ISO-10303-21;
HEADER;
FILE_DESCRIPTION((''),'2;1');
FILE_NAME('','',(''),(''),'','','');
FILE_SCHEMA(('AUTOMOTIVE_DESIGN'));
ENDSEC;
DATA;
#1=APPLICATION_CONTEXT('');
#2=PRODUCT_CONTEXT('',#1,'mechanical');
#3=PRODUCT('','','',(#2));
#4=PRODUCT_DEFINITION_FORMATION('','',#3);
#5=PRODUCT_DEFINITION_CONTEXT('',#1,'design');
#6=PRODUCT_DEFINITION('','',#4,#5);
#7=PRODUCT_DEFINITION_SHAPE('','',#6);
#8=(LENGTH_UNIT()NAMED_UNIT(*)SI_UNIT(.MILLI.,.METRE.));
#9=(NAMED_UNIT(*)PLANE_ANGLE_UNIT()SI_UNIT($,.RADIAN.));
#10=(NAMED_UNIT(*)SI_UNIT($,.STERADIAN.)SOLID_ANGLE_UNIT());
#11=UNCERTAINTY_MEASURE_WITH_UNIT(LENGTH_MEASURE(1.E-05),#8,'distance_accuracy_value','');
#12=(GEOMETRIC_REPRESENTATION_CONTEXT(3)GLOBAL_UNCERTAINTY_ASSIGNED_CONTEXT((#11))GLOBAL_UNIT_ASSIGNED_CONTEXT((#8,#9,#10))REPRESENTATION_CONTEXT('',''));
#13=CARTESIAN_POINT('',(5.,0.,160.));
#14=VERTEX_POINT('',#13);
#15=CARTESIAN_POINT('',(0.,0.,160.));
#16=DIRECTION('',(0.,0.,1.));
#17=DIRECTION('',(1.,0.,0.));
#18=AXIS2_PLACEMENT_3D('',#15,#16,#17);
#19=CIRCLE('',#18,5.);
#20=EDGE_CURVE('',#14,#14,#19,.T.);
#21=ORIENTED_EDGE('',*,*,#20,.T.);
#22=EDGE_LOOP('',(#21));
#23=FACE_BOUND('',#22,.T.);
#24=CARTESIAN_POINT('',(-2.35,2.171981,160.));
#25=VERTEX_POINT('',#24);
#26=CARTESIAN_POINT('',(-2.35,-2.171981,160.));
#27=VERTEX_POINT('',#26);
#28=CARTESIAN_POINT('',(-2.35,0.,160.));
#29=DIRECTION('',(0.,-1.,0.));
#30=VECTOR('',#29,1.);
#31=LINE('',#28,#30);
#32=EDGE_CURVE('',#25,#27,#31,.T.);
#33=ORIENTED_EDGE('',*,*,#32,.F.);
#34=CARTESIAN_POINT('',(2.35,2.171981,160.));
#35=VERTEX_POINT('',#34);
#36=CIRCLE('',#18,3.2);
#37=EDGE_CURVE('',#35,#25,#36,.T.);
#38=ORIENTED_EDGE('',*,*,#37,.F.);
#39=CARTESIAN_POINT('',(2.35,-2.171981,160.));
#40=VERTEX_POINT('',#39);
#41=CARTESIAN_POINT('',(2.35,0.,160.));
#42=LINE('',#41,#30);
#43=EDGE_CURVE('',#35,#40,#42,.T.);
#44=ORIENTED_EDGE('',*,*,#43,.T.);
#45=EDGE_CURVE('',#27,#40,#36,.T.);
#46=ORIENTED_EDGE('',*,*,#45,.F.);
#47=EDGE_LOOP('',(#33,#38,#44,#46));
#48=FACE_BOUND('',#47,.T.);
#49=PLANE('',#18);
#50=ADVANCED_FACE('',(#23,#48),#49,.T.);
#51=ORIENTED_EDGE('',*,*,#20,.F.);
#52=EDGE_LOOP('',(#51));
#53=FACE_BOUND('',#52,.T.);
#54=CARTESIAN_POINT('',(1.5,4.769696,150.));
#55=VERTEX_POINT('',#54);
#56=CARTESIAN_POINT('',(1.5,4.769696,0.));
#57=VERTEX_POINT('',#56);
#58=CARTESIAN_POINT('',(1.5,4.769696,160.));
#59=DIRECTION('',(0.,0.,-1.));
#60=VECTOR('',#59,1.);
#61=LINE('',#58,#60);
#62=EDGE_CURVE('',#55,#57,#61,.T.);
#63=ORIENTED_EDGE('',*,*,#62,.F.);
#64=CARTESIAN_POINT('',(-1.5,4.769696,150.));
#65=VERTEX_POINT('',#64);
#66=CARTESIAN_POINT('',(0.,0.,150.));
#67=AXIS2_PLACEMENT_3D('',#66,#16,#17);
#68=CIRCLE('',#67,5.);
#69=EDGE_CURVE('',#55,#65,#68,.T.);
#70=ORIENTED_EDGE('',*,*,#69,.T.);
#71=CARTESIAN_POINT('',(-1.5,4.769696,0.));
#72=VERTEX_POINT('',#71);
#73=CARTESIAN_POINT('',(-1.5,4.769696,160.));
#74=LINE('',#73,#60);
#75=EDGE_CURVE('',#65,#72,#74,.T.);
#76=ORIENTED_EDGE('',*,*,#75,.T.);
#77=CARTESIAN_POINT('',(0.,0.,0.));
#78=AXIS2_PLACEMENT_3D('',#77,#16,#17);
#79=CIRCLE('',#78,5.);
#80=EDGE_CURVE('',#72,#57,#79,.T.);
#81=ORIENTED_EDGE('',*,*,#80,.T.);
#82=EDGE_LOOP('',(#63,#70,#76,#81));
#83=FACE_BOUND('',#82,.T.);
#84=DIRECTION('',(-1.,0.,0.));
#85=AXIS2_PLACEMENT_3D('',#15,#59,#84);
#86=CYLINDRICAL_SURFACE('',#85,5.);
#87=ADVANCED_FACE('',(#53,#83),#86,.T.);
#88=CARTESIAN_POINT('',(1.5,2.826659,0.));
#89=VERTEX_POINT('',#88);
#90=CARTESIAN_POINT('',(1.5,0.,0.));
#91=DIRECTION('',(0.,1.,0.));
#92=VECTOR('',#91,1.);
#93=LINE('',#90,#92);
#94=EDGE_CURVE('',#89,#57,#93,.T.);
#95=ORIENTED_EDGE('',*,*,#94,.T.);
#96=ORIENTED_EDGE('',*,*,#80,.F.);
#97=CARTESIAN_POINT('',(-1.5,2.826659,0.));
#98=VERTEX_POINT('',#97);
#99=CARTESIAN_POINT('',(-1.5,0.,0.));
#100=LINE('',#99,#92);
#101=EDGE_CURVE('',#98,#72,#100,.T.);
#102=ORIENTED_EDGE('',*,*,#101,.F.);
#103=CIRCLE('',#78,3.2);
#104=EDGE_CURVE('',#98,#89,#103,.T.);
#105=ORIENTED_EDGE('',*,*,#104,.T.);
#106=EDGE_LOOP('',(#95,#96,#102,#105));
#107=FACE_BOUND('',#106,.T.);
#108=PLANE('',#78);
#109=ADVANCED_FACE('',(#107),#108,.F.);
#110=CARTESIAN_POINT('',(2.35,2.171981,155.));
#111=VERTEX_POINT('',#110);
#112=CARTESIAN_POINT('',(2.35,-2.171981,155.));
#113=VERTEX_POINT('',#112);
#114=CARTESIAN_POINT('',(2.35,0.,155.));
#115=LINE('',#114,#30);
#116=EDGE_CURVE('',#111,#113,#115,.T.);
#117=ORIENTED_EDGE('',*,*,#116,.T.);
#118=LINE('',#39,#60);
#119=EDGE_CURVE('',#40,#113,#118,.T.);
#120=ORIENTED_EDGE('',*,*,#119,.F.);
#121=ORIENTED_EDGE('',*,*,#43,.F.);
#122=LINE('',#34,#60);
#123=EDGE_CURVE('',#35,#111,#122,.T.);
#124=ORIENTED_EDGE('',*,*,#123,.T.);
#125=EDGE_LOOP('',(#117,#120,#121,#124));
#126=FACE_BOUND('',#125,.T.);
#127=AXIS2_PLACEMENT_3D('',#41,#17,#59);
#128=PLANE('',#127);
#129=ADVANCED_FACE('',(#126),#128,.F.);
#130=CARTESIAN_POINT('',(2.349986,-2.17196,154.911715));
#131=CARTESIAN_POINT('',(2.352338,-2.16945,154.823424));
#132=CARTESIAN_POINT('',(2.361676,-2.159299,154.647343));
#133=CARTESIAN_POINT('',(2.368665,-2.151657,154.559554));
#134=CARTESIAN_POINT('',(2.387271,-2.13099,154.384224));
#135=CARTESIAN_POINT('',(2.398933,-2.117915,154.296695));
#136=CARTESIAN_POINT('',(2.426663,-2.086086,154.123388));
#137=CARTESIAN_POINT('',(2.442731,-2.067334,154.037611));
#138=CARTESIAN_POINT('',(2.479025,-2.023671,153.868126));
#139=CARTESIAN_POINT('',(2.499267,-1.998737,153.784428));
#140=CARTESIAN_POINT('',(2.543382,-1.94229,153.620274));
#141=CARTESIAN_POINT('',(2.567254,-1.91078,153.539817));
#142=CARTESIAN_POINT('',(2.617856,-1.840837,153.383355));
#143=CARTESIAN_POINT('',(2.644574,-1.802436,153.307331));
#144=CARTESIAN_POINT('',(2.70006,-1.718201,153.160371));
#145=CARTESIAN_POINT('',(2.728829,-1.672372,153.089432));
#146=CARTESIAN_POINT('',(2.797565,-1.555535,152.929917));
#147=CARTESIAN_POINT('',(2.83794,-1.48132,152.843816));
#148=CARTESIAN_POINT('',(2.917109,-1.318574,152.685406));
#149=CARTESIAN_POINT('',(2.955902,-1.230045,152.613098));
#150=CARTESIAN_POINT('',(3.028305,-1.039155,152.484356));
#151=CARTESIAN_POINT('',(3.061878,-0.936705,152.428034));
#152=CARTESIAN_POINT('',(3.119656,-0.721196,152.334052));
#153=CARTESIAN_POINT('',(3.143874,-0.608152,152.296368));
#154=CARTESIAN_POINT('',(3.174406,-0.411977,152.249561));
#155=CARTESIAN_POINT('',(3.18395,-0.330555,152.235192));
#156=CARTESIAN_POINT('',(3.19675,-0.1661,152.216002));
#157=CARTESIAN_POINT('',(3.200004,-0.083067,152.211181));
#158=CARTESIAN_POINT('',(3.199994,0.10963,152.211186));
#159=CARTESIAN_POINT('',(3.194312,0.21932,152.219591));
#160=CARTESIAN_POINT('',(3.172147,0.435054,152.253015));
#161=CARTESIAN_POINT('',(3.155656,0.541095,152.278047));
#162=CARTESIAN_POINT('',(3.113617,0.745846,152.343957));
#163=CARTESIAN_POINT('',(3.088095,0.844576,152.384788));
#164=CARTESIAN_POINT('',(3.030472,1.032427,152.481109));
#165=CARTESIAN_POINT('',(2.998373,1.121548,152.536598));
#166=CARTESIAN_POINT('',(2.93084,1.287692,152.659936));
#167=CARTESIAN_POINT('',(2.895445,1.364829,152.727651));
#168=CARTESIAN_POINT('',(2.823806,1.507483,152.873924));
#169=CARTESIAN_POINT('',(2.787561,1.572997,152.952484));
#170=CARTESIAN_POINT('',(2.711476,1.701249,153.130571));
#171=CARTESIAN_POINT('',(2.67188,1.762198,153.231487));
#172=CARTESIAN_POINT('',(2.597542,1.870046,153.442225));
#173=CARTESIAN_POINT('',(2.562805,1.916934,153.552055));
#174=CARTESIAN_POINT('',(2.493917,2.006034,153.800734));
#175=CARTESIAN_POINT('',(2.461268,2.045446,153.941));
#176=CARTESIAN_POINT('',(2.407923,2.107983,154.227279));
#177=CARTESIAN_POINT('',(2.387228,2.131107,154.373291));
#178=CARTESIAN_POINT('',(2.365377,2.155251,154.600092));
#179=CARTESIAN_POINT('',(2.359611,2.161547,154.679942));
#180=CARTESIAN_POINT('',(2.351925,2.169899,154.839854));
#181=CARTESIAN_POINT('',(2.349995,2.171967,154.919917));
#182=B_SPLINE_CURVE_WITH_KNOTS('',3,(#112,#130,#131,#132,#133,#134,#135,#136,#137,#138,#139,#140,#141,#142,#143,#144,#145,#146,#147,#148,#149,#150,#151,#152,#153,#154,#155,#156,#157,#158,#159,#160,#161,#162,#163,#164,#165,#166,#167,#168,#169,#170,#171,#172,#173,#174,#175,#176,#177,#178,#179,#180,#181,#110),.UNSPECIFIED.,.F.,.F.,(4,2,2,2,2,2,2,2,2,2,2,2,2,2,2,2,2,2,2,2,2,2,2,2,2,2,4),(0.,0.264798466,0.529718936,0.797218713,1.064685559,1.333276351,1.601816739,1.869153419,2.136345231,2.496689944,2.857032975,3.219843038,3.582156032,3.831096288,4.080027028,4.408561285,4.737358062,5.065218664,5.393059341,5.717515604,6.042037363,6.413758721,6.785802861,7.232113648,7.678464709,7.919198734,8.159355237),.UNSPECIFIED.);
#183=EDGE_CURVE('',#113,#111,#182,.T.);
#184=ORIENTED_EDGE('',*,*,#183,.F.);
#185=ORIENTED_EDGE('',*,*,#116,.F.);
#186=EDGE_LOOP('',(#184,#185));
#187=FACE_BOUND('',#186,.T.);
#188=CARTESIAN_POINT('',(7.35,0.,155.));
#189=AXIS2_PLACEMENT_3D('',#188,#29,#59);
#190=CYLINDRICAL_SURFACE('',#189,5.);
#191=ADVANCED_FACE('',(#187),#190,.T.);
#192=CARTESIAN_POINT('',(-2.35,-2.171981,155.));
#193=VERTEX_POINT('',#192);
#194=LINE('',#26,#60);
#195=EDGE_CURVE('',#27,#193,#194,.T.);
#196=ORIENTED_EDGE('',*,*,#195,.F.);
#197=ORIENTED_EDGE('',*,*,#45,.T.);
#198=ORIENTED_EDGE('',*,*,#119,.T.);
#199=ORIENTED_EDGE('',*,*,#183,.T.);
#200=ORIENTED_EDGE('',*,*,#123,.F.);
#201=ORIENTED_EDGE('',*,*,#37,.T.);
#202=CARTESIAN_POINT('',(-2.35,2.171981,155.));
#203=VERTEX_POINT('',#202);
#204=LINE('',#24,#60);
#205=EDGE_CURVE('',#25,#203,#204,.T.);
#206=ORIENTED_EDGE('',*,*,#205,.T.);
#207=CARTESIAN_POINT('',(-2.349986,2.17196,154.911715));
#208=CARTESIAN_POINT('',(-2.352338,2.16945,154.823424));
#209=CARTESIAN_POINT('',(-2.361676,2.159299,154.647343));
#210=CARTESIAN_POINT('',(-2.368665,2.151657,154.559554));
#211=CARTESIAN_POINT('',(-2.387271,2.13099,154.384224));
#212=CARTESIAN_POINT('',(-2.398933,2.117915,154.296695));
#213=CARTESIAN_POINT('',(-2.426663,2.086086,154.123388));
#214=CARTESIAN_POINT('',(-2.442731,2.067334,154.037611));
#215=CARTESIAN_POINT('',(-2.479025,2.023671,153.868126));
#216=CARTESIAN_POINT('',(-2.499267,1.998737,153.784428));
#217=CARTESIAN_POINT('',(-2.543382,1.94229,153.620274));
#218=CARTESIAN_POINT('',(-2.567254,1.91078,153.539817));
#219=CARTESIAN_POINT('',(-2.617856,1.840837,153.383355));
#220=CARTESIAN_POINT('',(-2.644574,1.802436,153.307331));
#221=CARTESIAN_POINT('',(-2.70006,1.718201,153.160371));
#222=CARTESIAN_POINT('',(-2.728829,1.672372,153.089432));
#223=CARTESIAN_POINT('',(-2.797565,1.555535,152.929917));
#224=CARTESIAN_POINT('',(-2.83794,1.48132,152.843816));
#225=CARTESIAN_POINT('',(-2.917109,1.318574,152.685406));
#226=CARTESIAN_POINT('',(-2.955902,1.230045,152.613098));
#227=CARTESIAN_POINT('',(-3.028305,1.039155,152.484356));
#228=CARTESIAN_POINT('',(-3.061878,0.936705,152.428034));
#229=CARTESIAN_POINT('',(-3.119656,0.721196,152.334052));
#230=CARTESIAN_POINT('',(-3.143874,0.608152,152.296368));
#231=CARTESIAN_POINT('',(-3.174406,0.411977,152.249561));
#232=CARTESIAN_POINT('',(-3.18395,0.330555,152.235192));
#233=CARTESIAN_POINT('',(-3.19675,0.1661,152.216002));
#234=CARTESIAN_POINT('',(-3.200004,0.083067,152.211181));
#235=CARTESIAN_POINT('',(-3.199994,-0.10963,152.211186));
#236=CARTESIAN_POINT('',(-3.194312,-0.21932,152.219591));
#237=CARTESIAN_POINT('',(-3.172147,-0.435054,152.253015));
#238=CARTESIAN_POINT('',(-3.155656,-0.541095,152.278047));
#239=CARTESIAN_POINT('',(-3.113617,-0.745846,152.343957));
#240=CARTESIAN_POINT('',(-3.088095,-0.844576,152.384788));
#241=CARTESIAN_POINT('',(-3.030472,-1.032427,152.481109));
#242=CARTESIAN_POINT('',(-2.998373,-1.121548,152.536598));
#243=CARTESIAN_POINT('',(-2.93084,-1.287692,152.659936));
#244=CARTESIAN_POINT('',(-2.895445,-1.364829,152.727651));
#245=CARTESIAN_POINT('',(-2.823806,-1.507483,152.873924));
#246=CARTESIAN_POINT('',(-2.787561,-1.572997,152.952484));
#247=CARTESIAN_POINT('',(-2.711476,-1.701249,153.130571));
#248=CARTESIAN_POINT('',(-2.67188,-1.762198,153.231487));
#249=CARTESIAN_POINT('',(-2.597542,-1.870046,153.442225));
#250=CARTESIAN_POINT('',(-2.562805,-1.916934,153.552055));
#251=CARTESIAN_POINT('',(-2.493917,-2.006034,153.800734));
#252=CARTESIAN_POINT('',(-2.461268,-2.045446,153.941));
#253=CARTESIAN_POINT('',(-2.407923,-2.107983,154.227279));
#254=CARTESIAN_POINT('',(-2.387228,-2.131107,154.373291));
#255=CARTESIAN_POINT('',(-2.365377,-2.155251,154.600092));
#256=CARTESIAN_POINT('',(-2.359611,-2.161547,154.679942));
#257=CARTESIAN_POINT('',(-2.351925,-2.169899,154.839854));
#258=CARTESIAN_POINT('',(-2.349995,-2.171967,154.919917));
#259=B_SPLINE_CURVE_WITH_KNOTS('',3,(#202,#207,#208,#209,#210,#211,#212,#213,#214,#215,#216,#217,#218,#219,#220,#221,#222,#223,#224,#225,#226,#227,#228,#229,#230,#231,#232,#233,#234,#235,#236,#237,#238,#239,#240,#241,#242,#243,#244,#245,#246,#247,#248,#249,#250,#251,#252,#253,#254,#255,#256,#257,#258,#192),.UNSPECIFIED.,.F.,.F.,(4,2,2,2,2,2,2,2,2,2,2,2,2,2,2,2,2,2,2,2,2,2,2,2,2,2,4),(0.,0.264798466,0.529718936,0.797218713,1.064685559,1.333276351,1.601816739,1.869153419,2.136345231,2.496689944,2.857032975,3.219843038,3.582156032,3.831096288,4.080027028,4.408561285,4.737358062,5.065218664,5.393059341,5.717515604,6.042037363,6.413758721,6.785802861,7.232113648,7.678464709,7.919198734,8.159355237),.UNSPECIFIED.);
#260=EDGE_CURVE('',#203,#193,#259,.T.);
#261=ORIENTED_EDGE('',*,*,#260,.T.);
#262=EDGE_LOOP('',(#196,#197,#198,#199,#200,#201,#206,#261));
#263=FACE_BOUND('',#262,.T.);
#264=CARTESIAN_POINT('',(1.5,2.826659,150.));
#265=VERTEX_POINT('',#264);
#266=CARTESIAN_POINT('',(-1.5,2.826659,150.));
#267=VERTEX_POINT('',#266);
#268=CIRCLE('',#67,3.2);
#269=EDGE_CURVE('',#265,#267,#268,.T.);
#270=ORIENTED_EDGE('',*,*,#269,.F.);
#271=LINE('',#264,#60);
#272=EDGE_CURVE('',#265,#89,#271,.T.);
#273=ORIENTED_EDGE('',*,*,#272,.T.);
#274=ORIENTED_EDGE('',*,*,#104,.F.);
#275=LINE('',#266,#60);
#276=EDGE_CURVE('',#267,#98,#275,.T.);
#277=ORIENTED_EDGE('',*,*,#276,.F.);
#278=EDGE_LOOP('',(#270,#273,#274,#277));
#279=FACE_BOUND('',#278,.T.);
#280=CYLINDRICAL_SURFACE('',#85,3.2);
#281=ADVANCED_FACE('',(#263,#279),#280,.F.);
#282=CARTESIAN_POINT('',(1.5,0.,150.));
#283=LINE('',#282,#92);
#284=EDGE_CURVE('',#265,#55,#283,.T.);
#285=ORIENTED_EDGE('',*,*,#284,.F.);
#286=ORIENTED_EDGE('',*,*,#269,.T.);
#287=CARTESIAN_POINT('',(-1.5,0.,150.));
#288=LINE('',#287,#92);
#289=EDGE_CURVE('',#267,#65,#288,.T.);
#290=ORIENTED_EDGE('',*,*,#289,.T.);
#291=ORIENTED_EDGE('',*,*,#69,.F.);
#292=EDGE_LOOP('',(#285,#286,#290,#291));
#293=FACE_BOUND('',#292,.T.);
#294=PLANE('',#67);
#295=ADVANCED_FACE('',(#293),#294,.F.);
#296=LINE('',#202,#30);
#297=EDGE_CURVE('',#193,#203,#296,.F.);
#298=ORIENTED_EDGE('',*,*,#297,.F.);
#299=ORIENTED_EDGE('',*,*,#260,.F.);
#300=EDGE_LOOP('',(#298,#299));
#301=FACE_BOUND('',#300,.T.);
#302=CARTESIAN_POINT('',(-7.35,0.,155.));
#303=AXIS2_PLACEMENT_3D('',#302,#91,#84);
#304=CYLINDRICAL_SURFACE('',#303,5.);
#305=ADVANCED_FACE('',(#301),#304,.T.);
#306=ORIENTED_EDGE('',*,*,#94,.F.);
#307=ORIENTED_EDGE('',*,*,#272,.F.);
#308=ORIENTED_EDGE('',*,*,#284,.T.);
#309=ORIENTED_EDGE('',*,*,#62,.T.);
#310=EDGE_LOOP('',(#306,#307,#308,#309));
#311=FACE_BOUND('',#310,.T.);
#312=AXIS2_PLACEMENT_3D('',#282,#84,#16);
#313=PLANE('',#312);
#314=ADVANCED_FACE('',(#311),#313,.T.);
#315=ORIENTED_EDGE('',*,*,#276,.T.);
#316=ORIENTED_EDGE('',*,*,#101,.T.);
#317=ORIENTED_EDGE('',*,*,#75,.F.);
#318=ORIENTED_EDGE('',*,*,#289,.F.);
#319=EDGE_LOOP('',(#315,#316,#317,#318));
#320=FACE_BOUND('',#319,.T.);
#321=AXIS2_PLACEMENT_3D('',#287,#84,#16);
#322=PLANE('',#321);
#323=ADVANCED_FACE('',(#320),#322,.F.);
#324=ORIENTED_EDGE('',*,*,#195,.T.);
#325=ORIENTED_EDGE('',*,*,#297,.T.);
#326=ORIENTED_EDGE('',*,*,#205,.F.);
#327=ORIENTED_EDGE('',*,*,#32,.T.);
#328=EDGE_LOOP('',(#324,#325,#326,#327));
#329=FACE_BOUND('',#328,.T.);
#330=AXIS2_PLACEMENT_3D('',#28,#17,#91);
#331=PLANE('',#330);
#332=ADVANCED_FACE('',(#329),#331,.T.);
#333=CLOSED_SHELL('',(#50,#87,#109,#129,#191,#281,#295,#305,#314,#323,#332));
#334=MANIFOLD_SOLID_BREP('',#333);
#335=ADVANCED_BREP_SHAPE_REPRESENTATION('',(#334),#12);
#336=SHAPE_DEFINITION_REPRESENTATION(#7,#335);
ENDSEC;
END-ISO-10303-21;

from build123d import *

# Parameters (mm, degrees)
SKETCH1_R           = 5
SKETCH1_R_2         = 3.2
BOSS_EXTRUDE1_DEPTH = 160
CUT_EXTRUDE1_DEPTH  = 150
FILLET1_R           = 5


with BuildPart() as part:
    # Sketch1 → Boss-Extrude1 (new body)
    # profile 1 of 3: a face of its own
    with BuildSketch(Plane.XY):
        Circle(SKETCH1_R)
        Circle(SKETCH1_R_2, mode=Mode.SUBTRACT)
    # profile 2 of 3: a face of its own
    with BuildSketch(Plane.XY):
        with BuildLine():
            ThreePointArc((3.2, 0), (2.979932885, 1.166190379), (2.35, 2.171980663))
            Line((2.35, 2.171980663), (2.35, -2.171980663))
            ThreePointArc((2.35, -2.171980663), (2.979932885, -1.166190379), (3.2, 0))
        make_face()
    # profile 3 of 3: a face of its own
    with BuildSketch(Plane.XY):
        with BuildLine():
            Line((-2.35, -2.171980663), (-2.35, 2.171980663))
            ThreePointArc((-2.35, 2.171980663), (-3.2, 0), (-2.35, -2.171980663))
        make_face()
    extrude(amount=BOSS_EXTRUDE1_DEPTH)

    # Sketch2 → Cut-Extrude1 (cut)
    with BuildSketch(Plane.XY):
        with BuildLine():
            Line((1.5, 0), (1.5, -2.826658805))
            ThreePointArc((1.5, -2.826658805), (2.74226184, -1.64924225), (3.2, 0))
            ThreePointArc((3.2, 0), (2.74226184, 1.64924225), (1.5, 2.826658805))
            Line((1.5, 2.826658805), (1.5, 0))
        make_face()
        with BuildLine():
            ThreePointArc((-1.5, 2.826658805), (0, 3.2), (1.5, 2.826658805))
            Line((1.5, 2.826658805), (1.5, 5))
            Line((1.5, 5), (-1.5, 5))
            Line((-1.5, 5), (-1.5, 2.826658805))
        make_face()
        with BuildLine():
            ThreePointArc((-1.5, 2.826658805), (-3.2, 0), (-1.5, -2.826658805))
            Line((-1.5, -2.826658805), (-1.5, 0))
            Line((-1.5, 0), (-1.5, 2.826658805))
        make_face()
    extrude(amount=CUT_EXTRUDE1_DEPTH, mode=Mode.SUBTRACT)

    # Fillet1
    # the kernel refuses this fillet: 5 mm, written as the material it takes off along each edge
    with BuildSketch(Plane(origin=(2.35, 14.671980663, 150), x_dir=(0, 0, 1), z_dir=(0, -1, 0))) as fillet1_piece_1_section:
        with BuildLine():
            CenterArc((FILLET1_R, -FILLET1_R), FILLET1_R, 90, 90)
            Line((0, -FILLET1_R), (0, 0))
            Line((0, 0), (FILLET1_R, 0))
        make_face()
    fillet1_piece_1 = extrude(amount=29.343961326, mode=Mode.PRIVATE)
    fillet1_piece_1 = fillet1_piece_1 & Plane(origin=(0, 0, 151.715946683), x_dir=(1, 0, 0), z_dir=(0, 0, -1)) * Cylinder(3.2, 79, mode=Mode.PRIVATE)
    add(fillet1_piece_1, mode=Mode.SUBTRACT)
    with BuildSketch(Plane(origin=(-2.35, -14.671980663, 150), x_dir=(-1, 0, 0), z_dir=(0, 1, 0))) as fillet1_piece_2_section:
        with BuildLine():
            CenterArc((FILLET1_R, FILLET1_R), FILLET1_R, 180, 90)
            Line((0, FILLET1_R), (0, 0))
            Line((0, 0), (FILLET1_R, 0))
        make_face()
    fillet1_piece_2 = extrude(amount=29.343961326, mode=Mode.PRIVATE)
    fillet1_piece_2 = fillet1_piece_2 & Plane(origin=(0, 0, 151.715946769), x_dir=(1, 0, 0), z_dir=(0, 0, -1)) * Cylinder(3.2, 79, mode=Mode.PRIVATE)
    add(fillet1_piece_2, mode=Mode.SUBTRACT)


solid = part.part
